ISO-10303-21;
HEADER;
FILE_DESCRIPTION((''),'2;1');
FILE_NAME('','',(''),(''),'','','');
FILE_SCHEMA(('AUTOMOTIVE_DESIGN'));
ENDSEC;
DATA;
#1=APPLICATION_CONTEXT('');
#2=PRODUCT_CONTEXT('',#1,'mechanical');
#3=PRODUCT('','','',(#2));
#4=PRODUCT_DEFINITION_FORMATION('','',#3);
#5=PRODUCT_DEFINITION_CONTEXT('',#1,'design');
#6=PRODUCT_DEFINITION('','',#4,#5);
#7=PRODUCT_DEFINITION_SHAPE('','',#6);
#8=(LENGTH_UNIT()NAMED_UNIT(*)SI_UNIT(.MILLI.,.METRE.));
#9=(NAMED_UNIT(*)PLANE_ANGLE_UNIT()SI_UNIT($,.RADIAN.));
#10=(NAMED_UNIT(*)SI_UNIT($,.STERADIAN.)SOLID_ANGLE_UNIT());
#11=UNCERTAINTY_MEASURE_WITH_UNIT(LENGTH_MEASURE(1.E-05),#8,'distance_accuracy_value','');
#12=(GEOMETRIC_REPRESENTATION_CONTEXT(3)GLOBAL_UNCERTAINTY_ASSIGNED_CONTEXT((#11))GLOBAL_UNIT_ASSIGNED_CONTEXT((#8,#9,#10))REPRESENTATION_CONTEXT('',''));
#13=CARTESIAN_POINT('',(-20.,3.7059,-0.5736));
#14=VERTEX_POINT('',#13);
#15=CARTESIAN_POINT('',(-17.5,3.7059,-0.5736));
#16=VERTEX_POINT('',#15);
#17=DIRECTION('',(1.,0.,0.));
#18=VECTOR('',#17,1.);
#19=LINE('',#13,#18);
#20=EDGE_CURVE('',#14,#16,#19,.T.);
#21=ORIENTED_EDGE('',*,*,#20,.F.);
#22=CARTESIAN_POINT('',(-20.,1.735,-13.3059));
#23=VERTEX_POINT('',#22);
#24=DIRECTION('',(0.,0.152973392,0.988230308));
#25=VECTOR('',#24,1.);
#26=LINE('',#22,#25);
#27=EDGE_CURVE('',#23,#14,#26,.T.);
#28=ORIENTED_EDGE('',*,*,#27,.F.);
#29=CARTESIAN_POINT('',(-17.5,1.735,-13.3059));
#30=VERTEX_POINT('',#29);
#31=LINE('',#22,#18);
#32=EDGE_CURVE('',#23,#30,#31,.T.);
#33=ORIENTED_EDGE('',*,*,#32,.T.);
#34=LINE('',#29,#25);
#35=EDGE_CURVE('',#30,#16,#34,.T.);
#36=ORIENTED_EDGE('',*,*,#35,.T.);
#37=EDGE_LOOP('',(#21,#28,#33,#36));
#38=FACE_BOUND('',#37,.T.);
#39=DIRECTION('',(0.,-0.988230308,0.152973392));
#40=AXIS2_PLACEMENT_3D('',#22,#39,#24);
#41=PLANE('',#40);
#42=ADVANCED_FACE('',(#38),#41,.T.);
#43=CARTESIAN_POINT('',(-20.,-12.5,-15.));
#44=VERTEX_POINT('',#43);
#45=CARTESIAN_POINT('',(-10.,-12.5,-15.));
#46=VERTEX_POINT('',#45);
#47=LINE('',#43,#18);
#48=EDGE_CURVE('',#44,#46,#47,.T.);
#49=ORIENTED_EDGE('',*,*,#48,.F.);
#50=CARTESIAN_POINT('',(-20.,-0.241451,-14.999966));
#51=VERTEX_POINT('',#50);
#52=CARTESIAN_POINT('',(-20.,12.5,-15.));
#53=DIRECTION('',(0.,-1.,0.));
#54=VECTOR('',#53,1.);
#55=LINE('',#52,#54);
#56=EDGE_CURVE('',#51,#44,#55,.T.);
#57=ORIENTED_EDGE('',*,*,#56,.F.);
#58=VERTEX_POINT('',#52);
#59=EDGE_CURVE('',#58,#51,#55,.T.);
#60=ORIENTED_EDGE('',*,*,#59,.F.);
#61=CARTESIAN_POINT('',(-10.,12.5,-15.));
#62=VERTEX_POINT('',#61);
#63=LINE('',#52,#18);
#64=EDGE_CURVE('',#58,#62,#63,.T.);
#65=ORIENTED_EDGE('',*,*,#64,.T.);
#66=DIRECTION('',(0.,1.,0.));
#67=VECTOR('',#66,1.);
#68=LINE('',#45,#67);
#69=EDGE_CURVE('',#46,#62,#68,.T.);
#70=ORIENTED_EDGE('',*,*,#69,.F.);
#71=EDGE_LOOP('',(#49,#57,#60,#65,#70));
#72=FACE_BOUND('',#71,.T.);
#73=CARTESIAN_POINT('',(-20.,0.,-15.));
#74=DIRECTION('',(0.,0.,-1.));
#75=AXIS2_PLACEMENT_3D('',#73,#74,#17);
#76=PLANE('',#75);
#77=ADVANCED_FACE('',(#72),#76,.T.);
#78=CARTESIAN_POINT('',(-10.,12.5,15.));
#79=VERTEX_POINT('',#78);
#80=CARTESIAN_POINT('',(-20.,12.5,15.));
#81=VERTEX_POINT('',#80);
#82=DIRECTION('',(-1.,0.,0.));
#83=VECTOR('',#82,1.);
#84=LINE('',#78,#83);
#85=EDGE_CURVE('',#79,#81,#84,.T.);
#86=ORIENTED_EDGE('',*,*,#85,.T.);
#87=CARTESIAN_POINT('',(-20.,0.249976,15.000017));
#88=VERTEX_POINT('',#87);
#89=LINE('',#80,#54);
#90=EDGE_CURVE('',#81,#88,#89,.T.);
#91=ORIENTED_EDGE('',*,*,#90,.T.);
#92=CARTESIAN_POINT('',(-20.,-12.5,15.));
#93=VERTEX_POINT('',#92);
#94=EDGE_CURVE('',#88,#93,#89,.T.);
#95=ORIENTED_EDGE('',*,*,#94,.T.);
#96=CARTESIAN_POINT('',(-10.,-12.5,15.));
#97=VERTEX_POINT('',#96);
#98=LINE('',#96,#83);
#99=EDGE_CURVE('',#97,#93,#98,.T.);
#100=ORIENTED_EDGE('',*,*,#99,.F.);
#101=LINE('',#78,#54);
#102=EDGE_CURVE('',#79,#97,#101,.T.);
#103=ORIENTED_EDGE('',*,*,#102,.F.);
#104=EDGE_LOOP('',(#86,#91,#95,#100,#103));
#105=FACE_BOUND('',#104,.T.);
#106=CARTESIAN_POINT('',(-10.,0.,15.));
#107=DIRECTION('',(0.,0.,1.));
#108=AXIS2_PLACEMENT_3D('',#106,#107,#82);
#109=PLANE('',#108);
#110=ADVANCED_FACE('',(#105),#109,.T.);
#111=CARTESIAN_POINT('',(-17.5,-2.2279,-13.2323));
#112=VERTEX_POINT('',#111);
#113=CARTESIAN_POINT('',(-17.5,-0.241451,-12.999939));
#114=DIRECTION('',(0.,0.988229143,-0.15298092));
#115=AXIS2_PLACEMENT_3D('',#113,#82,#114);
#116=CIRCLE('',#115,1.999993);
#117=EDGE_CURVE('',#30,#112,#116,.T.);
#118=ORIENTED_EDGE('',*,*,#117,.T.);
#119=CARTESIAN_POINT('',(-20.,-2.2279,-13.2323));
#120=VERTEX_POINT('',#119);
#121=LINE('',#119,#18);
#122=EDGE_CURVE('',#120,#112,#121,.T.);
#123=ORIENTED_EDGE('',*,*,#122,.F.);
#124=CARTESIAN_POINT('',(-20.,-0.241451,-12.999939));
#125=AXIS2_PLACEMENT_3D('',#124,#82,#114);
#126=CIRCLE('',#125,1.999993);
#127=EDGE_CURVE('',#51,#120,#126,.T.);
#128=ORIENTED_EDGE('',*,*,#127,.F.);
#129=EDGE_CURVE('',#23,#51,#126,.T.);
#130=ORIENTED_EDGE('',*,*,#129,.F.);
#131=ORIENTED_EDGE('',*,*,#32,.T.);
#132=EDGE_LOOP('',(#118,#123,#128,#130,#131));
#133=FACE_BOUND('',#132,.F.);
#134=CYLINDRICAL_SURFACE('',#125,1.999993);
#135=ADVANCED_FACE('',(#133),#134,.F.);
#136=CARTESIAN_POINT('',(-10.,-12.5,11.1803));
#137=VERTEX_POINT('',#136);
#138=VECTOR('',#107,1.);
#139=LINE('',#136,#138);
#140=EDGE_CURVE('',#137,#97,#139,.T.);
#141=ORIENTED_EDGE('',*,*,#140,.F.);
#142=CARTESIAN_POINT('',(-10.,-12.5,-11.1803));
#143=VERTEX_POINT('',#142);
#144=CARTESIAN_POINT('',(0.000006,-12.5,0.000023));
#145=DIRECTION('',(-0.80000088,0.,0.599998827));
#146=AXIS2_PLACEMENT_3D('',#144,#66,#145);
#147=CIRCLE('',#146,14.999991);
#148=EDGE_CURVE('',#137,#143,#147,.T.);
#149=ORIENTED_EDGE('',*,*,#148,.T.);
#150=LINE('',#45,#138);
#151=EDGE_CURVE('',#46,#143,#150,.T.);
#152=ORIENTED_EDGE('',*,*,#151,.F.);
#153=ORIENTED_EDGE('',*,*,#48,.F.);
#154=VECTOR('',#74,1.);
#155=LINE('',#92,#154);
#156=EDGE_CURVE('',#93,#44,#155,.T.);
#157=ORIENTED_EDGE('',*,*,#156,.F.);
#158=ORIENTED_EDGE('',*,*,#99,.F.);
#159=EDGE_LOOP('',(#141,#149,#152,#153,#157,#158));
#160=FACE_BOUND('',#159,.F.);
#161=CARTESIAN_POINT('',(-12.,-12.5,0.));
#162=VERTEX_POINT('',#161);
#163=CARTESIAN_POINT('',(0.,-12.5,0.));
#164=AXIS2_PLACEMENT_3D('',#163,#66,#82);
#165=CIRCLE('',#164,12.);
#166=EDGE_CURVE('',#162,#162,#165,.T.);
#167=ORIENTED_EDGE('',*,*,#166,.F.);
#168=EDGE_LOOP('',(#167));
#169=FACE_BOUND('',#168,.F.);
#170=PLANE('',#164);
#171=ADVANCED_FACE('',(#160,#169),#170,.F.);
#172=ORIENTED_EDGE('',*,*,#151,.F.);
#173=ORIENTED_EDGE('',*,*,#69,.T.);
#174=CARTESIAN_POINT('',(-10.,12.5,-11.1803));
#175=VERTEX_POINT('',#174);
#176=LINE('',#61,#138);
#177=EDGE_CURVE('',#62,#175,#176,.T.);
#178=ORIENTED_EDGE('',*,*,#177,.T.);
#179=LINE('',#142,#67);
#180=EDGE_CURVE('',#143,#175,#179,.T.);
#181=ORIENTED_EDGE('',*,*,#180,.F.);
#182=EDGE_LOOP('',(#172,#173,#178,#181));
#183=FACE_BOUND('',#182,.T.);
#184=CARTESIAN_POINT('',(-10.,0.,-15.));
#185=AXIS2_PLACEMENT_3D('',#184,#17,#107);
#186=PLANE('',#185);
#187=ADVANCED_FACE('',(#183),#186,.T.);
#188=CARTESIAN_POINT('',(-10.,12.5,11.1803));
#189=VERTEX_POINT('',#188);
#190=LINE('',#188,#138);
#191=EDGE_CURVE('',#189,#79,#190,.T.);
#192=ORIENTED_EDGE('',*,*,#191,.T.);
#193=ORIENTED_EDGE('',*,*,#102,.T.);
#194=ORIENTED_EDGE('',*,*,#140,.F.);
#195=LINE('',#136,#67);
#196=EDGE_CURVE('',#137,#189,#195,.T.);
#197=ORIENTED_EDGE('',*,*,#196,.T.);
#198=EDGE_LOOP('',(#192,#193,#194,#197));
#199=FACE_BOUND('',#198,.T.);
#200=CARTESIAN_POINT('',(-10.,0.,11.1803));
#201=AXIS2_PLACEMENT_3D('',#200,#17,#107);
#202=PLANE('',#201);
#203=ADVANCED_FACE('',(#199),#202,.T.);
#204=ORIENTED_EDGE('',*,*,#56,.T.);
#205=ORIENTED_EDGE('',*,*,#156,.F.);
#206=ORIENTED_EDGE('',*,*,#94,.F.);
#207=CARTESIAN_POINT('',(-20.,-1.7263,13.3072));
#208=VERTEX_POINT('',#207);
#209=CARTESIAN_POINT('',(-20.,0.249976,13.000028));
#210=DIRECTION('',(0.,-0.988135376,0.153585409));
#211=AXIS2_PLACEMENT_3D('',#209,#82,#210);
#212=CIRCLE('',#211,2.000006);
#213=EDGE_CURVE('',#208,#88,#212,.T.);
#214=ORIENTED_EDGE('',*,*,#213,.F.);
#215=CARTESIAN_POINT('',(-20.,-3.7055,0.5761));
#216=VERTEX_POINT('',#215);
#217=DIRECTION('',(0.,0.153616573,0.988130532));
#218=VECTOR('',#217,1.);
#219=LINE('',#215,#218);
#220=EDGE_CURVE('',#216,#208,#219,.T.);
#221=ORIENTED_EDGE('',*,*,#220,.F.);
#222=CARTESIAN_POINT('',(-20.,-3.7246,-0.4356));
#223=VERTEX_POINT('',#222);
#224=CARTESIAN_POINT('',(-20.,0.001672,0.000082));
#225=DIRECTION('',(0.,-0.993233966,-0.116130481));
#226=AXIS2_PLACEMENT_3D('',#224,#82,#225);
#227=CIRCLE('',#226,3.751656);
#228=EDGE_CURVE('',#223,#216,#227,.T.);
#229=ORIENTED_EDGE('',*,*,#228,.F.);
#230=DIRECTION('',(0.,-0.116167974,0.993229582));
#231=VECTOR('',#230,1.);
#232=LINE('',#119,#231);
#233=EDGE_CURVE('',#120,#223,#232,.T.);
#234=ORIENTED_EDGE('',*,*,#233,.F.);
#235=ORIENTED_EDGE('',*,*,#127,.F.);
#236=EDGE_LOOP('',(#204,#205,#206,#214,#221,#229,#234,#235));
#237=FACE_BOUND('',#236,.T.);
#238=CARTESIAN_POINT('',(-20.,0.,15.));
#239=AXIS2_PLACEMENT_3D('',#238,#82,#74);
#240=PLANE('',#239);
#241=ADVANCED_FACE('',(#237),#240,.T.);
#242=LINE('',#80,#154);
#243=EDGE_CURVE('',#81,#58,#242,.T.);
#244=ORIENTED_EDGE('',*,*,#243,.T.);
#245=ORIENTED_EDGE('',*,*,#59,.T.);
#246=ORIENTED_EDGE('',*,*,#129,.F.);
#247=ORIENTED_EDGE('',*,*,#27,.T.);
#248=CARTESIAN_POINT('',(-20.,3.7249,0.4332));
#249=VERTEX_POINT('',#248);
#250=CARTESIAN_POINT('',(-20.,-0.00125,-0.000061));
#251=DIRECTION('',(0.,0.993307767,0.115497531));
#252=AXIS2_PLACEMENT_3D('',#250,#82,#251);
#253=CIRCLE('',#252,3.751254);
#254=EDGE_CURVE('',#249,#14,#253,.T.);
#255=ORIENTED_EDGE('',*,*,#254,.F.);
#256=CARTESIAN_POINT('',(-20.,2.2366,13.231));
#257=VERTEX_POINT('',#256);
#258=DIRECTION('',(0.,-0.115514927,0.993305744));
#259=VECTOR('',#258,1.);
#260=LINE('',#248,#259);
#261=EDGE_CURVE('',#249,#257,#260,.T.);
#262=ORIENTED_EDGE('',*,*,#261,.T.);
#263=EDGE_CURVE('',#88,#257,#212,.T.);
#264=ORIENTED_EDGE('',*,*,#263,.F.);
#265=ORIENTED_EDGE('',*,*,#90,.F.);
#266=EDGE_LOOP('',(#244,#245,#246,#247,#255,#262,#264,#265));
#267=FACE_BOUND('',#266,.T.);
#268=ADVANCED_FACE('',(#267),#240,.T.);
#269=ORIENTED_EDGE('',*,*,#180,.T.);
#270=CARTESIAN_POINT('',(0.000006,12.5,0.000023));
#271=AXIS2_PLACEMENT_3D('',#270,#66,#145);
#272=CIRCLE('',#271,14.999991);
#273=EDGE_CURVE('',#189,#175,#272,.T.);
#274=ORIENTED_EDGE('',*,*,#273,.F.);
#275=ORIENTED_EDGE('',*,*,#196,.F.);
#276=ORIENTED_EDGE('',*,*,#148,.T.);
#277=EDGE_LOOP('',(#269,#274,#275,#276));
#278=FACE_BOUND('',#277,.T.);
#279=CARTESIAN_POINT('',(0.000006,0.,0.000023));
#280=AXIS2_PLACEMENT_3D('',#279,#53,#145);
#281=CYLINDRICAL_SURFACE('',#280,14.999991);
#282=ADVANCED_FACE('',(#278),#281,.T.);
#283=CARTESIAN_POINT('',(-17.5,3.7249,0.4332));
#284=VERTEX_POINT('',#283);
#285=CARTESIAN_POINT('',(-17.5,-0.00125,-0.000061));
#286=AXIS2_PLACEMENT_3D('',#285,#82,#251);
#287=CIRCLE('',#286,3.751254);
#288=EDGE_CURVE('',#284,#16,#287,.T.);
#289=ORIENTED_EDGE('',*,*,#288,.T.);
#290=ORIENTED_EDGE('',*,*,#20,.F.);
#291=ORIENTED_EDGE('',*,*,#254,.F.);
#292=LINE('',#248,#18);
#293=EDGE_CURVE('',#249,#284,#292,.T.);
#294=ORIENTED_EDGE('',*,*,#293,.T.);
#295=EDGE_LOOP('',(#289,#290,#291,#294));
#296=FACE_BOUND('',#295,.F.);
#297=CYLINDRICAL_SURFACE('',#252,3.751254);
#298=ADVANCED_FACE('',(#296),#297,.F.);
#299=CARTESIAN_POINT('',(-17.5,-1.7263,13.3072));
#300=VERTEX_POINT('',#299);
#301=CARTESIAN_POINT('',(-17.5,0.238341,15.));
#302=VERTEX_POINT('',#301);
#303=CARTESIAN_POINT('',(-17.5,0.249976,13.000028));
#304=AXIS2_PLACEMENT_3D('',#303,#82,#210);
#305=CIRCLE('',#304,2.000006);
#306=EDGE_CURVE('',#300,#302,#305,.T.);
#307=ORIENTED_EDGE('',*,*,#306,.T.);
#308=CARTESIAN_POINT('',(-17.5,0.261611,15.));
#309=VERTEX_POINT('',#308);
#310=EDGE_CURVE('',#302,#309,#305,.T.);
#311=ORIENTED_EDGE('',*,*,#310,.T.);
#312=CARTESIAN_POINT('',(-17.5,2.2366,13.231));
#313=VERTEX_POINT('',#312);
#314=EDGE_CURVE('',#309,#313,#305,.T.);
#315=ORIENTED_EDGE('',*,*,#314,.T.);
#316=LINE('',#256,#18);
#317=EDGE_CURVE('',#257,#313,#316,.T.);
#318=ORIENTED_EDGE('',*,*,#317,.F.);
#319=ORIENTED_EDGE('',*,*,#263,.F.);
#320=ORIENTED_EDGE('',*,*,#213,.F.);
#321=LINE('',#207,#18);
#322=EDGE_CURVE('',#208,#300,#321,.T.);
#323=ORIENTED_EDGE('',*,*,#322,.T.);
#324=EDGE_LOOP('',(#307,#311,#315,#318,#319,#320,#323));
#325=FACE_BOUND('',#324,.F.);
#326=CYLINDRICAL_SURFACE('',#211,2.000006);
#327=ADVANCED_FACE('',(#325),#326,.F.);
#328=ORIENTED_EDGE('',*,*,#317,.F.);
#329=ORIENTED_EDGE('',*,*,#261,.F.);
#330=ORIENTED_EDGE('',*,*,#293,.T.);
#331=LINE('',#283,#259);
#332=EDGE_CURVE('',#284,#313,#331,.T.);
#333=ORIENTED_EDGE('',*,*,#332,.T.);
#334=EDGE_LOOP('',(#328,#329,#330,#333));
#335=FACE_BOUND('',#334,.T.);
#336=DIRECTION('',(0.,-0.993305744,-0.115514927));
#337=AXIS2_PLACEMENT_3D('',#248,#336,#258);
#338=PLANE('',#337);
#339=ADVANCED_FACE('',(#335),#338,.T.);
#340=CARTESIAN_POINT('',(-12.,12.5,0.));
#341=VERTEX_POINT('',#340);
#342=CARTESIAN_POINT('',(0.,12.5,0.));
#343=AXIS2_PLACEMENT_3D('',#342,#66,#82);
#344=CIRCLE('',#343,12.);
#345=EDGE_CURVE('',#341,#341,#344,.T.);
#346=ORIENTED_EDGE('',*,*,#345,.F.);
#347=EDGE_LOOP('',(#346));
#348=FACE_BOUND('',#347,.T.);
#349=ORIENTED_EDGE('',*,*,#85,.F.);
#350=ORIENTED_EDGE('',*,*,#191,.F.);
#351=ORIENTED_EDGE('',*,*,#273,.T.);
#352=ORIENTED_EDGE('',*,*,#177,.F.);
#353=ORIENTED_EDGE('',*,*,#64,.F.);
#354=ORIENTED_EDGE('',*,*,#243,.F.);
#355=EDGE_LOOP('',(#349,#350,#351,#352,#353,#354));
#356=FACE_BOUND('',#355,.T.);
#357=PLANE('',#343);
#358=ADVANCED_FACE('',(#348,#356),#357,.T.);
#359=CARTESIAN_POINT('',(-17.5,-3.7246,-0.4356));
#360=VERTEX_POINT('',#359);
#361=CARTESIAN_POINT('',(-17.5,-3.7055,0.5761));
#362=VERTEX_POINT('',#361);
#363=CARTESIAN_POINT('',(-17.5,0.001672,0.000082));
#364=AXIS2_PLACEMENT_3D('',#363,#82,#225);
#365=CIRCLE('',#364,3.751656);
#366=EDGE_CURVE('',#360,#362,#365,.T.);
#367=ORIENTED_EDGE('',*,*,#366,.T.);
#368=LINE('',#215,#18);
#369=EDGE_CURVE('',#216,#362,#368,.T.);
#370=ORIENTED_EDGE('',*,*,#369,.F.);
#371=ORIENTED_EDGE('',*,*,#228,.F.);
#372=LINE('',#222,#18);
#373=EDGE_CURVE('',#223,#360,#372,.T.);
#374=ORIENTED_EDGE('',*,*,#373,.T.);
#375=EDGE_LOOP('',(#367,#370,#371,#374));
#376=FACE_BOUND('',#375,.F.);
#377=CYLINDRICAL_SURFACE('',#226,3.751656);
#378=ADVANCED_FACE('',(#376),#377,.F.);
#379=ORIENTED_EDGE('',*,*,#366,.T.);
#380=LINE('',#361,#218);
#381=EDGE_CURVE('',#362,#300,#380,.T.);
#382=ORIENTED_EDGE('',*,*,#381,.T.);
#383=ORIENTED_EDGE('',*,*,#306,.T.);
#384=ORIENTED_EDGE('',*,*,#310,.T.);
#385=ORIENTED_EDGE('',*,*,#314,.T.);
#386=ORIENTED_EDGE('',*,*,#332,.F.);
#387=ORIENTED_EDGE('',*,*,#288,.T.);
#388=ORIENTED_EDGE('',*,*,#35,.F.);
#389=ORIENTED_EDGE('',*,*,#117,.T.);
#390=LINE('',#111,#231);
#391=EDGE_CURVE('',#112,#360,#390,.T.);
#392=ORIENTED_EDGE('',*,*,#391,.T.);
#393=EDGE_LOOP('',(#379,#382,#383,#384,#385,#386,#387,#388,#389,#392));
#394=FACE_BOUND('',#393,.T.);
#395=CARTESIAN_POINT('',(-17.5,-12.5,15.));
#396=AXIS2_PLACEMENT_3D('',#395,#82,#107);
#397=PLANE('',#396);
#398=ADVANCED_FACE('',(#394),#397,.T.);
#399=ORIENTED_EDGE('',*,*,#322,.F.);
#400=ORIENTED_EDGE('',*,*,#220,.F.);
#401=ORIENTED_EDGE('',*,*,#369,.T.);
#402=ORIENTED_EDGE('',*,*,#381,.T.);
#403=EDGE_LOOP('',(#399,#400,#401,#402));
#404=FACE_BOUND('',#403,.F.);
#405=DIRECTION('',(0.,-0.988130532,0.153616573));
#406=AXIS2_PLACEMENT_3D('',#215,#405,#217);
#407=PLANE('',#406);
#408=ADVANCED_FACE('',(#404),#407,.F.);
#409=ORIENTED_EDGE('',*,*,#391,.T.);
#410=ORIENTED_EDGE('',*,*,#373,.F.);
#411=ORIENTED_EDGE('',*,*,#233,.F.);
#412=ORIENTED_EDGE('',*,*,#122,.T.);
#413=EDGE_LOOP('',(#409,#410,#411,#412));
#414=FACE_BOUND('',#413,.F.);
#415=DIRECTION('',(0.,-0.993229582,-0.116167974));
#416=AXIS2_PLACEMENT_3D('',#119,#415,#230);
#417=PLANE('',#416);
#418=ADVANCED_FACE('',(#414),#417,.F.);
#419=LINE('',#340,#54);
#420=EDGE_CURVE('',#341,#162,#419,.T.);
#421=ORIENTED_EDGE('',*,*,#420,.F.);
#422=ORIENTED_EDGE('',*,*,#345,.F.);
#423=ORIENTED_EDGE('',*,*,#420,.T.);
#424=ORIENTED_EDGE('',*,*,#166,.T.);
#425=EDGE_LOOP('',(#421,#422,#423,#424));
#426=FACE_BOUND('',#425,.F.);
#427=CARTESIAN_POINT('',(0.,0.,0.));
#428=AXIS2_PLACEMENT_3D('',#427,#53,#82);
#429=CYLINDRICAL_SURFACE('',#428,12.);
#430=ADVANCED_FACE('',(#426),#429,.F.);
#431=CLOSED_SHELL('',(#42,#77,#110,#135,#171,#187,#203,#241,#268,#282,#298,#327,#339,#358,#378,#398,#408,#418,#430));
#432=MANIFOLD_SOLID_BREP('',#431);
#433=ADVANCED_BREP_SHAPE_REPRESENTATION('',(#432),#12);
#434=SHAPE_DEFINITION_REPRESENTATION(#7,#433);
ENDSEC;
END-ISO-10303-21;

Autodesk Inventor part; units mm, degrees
ref_plane "YZ Plane" through (0, 0, 0) normal (1, 0, 0) x (0, 1, 0)
ref_plane "XZ Plane" through (0, 0, 0) normal (0, 1, 0) x (-1, 0, 0)
ref_plane "XY Plane" through (0, 0, 0) normal (0, 0, 1) x (1, 0, 0)
sketch "Sketch1" plane through (0, 0, 0) normal (0, 1, 0) x (-1, 0, 0)
  arc A0 (12, 9) -> (10, -11.1803) centre (0, 0) ccw
  line L0 (10, 15) -> (20, 15)
  line L1 (20, 15) -> (20, -15)
  line L2 (20, -15) -> (10, -15)
  line L3 (10, 15) -> (20, -15) construction
  line L4 (20, 15) -> (10, -15) construction
  line L5 (10, -15) -> (10, -11.1803)
  line L6 (10, 11.1803) -> (10, 15)
  circle A1 centre (0, 0) radius 12
  dimension "d0" = 30
  dimension "d1" = 10
  dimension "d2" = 30
  dimension "d3" = 18.435
  dimension "d4" = 20
  dimension "d5" = 24
extrude "Extrusion1" add sketch "Sketch1" along normal mid plane 25
sketch "Sketch2" plane through (-20, -12.5, 15) normal (-1, 0, 0) x (0, 0, 1)
  arc A0 (-1.6928, 10.7737) -> (-1.769, 14.7366) centre (-2, 12.75) ccw
  arc A1 (-28.3059, 14.235) -> (-28.2323, 10.2721) centre (-28, 12.2586) ccw
  line L0 (-28.3059, 14.235) -> (-15.5736, 16.2059)
  line L1 (-28.2323, 10.2721) -> (-15.4356, 8.7754)
  line L2 (-14.5668, 16.2249) -> (-1.769, 14.7366)
  line L3 (-14.4239, 8.7945) -> (-1.6928, 10.7737)
  arc A2 (-15.4356, 8.7754) -> (-14.4239, 8.7945) centre (-15, 12.5) ccw
  arc A3 (-14.5668, 16.2249) -> (-15.5736, 16.2059) centre (-15, 12.5) ccw
  dimension "d8" = 4
  dimension "d9" = 4
  dimension "d11" = 26
  dimension "d12" = 13
extrude "Extrusion2" cut sketch "Sketch2" against normal blind 2.5
properties part number "motor mount"
